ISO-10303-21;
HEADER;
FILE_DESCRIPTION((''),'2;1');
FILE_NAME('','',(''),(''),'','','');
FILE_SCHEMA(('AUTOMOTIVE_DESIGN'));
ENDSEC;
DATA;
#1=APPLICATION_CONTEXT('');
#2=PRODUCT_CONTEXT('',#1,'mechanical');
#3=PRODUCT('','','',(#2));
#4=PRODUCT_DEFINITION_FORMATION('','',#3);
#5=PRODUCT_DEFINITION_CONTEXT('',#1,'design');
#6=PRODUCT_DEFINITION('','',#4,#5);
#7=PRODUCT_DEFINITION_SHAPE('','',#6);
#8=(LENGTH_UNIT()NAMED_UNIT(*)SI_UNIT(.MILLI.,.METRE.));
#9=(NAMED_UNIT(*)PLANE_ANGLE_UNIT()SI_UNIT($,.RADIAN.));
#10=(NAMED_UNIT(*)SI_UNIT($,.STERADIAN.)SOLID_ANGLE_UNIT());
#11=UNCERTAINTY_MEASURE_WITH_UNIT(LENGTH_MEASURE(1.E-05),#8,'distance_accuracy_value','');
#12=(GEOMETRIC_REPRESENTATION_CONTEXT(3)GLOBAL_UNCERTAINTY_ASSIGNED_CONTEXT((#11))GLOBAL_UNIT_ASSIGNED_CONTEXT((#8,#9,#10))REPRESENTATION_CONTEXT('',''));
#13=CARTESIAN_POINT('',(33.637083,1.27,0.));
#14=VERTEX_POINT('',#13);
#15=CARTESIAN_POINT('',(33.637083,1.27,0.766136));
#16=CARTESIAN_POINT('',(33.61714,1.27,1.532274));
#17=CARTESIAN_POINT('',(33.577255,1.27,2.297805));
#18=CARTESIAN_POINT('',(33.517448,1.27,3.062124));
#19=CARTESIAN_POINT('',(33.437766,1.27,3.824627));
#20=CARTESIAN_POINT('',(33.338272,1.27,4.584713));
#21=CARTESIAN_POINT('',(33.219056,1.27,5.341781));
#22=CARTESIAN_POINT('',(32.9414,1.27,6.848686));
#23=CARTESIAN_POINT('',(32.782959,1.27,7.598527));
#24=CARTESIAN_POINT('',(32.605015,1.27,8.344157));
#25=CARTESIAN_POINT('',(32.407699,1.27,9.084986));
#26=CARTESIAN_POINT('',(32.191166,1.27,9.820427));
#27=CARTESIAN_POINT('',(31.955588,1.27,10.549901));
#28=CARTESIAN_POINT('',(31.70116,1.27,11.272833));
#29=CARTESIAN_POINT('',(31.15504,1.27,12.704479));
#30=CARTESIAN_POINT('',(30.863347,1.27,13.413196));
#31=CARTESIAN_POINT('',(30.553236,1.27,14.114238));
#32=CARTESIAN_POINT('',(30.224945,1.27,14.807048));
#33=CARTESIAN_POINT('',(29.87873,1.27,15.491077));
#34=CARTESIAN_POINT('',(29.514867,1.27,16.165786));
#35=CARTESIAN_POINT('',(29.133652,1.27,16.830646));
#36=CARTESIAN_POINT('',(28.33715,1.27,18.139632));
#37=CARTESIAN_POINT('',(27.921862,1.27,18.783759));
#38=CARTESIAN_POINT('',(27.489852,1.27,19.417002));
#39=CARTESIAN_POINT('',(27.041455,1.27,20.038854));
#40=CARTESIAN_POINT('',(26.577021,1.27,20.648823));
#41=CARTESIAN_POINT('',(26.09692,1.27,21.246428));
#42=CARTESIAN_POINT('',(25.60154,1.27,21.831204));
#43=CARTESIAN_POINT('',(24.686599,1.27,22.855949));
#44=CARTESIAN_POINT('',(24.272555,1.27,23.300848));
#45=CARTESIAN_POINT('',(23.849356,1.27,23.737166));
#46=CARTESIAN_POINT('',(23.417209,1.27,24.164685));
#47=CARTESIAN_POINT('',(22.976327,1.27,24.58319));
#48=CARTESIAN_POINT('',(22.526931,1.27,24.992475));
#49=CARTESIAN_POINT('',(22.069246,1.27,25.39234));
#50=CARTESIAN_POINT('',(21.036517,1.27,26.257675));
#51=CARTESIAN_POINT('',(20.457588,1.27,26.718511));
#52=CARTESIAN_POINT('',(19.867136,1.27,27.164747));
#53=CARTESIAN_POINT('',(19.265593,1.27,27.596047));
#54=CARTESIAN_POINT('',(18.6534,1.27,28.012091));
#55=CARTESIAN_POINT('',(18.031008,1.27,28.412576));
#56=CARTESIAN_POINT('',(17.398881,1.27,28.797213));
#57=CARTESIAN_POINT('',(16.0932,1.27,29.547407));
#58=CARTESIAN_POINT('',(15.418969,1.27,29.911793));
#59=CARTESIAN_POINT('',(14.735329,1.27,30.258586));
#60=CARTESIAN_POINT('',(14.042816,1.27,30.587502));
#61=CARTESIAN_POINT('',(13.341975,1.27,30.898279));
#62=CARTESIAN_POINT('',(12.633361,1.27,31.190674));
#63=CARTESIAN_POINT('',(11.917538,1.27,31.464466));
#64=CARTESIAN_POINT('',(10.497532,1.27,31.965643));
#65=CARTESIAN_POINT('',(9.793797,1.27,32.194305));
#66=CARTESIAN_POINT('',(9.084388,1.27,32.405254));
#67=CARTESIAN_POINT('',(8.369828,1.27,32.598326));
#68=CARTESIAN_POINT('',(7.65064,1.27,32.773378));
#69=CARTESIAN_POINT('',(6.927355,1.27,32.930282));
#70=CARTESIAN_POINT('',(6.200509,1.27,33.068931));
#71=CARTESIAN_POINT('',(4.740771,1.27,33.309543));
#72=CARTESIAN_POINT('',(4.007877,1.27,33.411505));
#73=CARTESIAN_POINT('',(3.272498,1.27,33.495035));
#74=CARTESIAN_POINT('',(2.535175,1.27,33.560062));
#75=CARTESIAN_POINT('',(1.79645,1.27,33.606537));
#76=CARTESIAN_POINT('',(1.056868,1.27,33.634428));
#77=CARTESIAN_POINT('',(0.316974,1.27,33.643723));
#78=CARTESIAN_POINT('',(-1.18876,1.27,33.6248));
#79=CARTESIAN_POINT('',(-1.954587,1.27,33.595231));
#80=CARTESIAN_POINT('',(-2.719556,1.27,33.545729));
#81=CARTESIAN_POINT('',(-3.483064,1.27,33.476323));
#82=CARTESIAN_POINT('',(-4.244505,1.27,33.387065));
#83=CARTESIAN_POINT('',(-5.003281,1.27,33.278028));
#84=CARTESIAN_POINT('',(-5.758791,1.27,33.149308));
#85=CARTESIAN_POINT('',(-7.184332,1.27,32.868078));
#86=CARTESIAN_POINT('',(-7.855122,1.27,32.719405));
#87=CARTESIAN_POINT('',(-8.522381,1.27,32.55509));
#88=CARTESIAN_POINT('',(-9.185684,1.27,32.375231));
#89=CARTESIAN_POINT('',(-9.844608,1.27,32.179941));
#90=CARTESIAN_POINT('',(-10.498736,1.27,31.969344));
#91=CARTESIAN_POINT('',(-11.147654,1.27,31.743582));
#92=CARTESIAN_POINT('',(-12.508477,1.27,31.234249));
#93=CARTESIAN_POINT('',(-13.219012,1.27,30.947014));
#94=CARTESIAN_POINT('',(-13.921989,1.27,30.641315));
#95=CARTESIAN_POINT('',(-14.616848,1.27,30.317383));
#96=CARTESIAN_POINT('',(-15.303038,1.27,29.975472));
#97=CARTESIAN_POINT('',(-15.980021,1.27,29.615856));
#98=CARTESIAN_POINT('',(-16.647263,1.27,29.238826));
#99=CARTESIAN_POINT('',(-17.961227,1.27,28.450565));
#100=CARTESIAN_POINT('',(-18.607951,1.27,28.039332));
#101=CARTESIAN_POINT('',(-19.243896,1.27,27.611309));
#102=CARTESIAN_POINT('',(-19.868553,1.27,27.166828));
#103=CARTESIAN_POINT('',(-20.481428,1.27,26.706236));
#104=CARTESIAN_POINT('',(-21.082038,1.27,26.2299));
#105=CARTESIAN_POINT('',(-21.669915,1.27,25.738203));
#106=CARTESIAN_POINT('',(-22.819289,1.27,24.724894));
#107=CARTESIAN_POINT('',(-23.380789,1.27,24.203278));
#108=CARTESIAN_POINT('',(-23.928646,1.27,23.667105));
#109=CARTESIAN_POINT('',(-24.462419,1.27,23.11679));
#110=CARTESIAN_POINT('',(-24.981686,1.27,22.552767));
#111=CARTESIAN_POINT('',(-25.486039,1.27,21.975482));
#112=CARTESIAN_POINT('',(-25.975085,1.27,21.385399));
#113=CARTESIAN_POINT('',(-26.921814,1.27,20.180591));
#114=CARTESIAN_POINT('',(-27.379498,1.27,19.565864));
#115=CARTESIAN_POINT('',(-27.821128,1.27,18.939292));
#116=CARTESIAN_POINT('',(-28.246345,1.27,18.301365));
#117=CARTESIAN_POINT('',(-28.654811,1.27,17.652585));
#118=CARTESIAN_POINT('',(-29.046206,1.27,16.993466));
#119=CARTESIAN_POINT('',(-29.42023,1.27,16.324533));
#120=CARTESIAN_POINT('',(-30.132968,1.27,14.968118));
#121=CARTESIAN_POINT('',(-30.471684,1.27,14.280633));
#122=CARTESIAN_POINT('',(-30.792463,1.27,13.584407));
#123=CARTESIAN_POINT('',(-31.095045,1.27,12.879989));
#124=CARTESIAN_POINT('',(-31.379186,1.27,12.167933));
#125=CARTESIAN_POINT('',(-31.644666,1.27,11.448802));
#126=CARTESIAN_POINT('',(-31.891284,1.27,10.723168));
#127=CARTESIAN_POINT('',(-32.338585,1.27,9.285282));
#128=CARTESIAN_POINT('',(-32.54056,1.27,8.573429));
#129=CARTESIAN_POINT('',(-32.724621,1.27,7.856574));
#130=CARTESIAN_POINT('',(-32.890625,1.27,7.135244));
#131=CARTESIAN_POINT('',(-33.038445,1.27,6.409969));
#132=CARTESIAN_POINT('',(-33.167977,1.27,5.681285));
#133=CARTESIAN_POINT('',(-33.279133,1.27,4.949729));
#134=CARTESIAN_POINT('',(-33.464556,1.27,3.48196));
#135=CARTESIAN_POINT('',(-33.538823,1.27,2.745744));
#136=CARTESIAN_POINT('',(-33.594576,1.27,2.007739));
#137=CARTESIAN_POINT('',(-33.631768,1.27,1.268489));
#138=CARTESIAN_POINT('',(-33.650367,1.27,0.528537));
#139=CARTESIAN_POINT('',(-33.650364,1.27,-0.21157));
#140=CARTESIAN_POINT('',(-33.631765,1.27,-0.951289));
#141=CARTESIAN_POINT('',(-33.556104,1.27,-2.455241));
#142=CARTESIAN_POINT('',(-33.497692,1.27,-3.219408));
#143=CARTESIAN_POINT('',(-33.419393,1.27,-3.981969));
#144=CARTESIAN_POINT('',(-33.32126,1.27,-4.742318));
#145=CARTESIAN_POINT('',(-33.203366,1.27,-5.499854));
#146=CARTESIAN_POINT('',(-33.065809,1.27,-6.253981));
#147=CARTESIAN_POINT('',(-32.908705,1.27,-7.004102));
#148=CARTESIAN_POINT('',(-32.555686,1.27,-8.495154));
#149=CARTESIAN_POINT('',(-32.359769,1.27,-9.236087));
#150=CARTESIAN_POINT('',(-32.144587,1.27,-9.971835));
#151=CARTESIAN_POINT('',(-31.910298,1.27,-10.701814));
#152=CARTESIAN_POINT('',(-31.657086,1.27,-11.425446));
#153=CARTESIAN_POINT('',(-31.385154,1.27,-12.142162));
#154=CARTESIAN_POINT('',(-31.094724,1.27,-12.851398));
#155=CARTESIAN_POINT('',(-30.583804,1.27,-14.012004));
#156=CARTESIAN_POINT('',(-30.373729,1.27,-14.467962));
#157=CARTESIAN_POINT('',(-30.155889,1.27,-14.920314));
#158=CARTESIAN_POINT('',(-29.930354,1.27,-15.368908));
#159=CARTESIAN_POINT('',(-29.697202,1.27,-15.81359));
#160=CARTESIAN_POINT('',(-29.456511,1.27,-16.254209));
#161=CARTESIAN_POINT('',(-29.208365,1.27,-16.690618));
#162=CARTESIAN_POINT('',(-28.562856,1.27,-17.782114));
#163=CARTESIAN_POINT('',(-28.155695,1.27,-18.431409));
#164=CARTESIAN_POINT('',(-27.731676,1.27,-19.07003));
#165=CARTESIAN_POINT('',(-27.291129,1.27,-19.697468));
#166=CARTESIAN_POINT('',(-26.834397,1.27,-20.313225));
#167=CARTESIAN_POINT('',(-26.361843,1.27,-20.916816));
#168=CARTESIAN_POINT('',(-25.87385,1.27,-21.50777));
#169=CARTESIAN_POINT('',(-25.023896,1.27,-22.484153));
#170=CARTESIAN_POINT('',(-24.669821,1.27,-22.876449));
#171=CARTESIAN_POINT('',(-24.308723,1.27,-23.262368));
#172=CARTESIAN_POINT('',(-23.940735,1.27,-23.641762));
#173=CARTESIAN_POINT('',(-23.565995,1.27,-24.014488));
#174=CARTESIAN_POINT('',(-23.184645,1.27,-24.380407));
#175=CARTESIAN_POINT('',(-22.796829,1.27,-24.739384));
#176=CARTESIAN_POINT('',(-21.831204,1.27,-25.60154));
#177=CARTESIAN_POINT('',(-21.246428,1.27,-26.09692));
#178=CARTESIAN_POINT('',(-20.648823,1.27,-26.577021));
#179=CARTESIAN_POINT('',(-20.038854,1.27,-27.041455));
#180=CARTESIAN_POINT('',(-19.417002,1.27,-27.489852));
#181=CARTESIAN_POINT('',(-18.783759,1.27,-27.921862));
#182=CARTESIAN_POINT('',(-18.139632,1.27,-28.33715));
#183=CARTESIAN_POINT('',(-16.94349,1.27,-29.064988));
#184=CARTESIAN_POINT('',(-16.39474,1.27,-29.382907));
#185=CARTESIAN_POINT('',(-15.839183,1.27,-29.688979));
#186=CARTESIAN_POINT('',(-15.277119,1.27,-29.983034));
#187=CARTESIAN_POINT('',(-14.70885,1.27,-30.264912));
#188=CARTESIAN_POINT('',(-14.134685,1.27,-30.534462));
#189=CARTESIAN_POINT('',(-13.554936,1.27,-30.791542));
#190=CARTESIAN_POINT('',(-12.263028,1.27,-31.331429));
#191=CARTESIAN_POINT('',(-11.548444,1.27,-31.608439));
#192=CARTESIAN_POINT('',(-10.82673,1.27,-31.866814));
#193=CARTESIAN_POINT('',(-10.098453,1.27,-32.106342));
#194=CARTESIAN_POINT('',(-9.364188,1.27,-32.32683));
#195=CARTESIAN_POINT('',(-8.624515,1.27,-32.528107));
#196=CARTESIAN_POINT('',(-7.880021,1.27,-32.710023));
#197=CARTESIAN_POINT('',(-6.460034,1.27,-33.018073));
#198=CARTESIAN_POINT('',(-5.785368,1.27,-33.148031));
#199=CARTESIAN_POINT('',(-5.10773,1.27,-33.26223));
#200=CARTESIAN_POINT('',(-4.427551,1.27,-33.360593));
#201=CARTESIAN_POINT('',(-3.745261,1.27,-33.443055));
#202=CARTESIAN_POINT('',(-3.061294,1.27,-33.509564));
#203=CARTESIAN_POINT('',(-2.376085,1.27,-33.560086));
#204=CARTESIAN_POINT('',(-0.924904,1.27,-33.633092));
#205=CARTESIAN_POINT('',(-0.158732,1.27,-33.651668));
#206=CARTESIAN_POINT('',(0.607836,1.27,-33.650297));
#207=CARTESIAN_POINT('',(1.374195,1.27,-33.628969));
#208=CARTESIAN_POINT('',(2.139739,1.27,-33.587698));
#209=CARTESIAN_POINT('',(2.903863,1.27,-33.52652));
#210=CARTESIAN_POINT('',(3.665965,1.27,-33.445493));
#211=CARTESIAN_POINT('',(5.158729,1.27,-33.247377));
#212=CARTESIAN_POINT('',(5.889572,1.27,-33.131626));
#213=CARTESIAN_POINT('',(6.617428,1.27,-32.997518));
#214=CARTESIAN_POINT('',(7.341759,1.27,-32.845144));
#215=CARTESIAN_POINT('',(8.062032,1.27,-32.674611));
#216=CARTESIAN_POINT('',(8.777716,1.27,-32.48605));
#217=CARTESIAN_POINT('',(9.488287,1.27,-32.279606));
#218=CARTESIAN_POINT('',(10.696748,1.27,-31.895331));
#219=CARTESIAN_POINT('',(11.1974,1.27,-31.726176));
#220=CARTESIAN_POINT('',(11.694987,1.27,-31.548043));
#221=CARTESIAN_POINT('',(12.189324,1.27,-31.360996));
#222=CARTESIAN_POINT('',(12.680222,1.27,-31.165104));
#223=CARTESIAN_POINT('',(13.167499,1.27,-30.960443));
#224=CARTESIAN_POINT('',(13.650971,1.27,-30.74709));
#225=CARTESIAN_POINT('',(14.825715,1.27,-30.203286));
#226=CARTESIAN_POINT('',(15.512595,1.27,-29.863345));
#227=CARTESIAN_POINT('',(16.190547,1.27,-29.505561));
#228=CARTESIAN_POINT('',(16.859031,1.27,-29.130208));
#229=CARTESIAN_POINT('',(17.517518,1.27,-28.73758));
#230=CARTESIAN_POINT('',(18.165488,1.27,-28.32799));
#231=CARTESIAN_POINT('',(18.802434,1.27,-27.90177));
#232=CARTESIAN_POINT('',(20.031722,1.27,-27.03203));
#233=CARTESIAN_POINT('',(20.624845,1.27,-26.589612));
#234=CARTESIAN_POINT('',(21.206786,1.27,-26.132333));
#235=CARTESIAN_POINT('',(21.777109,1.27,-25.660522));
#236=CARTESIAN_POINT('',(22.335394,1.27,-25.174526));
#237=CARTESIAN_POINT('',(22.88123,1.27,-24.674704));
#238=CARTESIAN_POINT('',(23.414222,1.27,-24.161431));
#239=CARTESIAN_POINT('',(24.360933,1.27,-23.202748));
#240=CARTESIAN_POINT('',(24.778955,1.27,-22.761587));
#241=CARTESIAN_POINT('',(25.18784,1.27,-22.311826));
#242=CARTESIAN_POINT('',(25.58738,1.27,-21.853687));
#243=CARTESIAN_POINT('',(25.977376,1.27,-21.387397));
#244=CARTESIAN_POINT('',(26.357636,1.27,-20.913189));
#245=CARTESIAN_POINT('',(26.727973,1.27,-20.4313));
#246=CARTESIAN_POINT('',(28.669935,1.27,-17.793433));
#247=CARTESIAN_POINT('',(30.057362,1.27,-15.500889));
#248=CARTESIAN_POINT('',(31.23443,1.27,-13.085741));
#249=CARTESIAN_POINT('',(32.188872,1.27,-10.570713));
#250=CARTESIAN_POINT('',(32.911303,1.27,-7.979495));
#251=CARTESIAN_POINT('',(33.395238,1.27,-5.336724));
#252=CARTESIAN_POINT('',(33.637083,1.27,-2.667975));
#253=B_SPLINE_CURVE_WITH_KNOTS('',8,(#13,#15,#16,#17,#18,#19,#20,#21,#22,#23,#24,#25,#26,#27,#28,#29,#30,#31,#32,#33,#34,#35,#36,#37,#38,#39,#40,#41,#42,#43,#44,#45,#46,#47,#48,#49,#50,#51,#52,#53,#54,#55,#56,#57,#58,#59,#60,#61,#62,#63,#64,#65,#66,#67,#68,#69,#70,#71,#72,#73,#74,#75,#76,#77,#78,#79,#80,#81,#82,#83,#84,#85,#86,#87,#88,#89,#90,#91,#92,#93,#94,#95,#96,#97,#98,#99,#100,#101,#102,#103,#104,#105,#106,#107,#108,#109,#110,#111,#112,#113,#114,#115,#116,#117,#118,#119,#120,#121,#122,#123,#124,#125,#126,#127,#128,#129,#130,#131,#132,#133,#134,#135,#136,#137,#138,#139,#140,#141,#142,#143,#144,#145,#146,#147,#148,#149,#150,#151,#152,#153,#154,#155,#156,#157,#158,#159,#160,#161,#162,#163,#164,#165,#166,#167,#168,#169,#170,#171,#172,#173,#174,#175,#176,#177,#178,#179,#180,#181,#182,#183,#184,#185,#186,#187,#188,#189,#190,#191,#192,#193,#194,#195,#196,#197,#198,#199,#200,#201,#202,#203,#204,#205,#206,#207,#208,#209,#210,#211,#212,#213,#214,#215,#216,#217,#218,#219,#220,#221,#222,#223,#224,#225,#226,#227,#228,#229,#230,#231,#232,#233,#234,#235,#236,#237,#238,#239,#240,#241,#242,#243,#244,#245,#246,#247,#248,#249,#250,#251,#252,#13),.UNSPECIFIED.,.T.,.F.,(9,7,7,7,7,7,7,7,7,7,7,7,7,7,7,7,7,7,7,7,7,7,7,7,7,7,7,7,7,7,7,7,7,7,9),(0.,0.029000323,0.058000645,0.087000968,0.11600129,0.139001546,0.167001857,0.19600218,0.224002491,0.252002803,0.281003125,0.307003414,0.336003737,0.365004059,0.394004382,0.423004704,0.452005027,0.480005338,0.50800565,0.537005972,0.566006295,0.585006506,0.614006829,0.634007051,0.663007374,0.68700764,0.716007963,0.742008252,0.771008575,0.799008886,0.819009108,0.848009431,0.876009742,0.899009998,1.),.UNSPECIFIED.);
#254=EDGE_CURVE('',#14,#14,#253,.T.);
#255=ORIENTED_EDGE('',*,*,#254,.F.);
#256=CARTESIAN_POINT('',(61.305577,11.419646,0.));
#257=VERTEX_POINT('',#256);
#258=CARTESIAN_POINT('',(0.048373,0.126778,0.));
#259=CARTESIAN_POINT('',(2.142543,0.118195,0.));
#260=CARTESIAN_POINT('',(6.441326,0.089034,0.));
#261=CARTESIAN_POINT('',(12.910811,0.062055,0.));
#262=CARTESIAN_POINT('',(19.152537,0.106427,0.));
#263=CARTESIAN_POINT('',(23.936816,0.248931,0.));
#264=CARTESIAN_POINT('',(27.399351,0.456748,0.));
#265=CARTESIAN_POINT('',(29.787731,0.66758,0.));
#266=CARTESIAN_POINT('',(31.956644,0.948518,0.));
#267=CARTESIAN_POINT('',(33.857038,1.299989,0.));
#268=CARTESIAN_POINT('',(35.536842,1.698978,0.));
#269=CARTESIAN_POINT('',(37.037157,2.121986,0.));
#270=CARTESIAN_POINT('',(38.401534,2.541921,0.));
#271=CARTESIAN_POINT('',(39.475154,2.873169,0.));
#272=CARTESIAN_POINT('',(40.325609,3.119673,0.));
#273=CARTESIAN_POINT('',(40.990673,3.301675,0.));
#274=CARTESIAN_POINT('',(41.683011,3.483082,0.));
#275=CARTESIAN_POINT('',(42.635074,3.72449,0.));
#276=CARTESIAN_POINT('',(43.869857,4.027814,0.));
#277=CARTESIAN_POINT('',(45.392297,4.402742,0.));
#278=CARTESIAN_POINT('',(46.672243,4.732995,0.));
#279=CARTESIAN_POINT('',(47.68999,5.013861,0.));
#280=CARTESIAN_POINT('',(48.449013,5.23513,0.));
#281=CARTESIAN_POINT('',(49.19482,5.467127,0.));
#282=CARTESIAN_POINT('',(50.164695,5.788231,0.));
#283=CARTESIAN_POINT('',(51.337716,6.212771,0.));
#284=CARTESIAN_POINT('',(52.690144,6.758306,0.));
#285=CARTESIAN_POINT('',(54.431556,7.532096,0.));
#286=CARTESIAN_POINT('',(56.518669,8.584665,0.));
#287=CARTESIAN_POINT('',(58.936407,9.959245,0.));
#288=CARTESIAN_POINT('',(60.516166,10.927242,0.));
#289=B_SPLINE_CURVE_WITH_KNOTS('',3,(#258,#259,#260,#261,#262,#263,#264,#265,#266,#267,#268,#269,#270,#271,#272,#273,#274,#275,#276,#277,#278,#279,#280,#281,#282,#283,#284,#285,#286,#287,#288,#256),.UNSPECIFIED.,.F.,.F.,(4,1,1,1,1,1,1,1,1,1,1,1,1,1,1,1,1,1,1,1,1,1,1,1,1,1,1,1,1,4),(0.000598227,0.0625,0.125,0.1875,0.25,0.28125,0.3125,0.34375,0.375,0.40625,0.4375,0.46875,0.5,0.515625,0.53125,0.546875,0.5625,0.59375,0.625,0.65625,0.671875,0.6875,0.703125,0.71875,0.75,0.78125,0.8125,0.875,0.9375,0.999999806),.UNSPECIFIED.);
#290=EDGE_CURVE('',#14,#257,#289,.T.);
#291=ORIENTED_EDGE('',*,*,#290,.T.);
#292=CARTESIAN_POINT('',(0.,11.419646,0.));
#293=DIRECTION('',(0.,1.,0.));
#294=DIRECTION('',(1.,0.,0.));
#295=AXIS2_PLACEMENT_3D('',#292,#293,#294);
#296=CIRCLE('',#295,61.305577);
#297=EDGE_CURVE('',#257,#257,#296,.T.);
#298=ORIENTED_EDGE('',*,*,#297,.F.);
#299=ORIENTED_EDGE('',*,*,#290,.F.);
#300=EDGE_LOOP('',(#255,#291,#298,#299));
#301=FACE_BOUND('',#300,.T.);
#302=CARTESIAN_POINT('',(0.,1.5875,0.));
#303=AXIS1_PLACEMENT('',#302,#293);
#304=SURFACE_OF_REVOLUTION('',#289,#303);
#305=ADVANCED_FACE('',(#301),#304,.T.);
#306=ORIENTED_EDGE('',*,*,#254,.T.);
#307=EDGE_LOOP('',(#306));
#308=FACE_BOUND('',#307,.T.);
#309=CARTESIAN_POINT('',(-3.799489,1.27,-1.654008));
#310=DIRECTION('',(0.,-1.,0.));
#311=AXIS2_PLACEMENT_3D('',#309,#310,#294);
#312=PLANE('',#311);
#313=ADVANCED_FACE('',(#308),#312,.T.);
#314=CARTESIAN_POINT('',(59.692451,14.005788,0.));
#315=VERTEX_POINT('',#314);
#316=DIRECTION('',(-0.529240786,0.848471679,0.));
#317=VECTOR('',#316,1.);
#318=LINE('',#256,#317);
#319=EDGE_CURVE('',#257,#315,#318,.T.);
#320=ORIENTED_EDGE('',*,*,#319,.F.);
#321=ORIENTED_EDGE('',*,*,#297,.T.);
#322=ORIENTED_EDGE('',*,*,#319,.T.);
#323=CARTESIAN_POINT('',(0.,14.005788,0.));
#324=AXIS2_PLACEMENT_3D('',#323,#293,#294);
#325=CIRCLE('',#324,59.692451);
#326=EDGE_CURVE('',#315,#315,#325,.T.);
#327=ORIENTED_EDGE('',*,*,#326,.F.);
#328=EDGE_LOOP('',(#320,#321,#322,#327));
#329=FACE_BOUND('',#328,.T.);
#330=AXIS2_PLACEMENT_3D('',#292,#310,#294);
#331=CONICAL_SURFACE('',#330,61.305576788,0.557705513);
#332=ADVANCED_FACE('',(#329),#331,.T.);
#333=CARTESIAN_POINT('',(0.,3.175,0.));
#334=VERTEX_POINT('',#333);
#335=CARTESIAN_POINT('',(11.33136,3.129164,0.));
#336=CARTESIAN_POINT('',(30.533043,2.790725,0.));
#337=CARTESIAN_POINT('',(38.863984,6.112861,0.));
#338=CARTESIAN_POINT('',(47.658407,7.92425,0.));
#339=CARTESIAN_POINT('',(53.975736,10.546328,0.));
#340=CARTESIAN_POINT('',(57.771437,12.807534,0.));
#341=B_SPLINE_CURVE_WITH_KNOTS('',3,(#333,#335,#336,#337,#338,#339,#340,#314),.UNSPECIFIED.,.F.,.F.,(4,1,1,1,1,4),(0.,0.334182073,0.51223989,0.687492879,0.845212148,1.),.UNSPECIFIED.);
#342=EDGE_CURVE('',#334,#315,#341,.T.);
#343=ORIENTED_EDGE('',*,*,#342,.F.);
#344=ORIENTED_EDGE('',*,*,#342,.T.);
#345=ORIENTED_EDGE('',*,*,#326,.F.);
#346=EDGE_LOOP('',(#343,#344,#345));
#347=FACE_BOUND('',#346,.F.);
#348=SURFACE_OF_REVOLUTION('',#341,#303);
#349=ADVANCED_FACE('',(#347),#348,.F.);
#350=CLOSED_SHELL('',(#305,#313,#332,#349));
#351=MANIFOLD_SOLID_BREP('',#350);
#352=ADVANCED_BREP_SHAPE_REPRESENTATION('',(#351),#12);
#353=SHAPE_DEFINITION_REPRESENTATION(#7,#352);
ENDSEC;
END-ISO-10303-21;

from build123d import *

# Parameters (mm, degrees)
F3_DEPTH = 1.27


# Not quite as in the source:
# - the dataset's text gives a spline's control points without its knots; the knots are read off the source's solid


with BuildPart() as f1:
    # F0 (on Top) → F1 (revolve)
    with BuildSketch(Plane.XY):
        with BuildLine():
            Line((0, 3.175), (0, 0))
            Line((0, 0), (0.0483732221, 0.126777769))
            add(Edge.make_bspline(
                [(0.0483732221, 0.1267777671), (2.1425433468, 0.1181949129), (6.4413258481, 0.0890337964), (12.9108112798, 0.0620545487), (19.1525366078, 0.1064268527), (23.9368157495, 0.2489309341), (27.3993505655, 0.4567479093), (29.7877305037, 0.6675796116), (31.9566435279, 0.9485179212), (33.8570376049, 1.2999888181), (35.5368416593, 1.69897799), (37.0371573939, 2.1219862961), (38.4015343875, 2.5419205888), (39.4751540886, 2.8731693163), (40.3256085154, 3.119672766), (40.9906733706, 3.3016750857), (41.6830106743, 3.4830815946), (42.6350739841, 3.724489538), (43.8698571739, 4.027813647), (45.3922972671, 4.4027417127), (46.6722427938, 4.7329949415), (47.689990497, 5.0138614605), (48.4490127923, 5.2351298254), (49.1948201109, 5.4671266007), (50.1646945957, 5.7882307085), (51.337715765, 6.212770994), (52.690143853, 6.758306314), (54.4315564533, 7.5320961824), (56.5186693938, 8.5846645619), (58.9364068625, 9.9592448244), (60.5161655926, 10.9272420375), (61.3055767878, 11.419646447)],
                knots=[0.0005982269, 0.0005982269, 0.0005982269, 0.0005982269, 0.0625, 0.125, 0.1875, 0.25, 0.28125, 0.3125, 0.34375, 0.375, 0.40625, 0.4375, 0.46875, 0.5, 0.515625, 0.53125, 0.546875, 0.5625, 0.59375, 0.625, 0.65625, 0.671875, 0.6875, 0.703125, 0.71875, 0.75, 0.78125, 0.8125, 0.875, 0.9375, 0.9999998063, 0.9999998063, 0.9999998063, 0.9999998063], degree=3))
            Line((61.3055767878, 11.419646447), (59.6924508727, 14.0057881257))
            add(Edge.make_bspline(
                [(0, 3.175), (11.3313598558, 3.1291642226), (30.5330430918, 2.7907248238), (38.8639839953, 6.1128612906), (47.6584070453, 7.9242497832), (53.9757361198, 10.5463281379), (57.7714374215, 12.8075335236), (59.6924508727, 14.0057881257)],
                knots=[0, 0, 0, 0, 0.3341820731, 0.5122398896, 0.6874928788, 0.8452121481, 1, 1, 1, 1], degree=3))
        make_face()
    revolve(axis=Axis((0, 1.5875, 0), (0, 1, 0)))

    # F2 (on Front) → F3 (cut, symmetric)
    with BuildSketch(Plane.XZ):
        Polygon((-63.8710334897, -66.6622146964), (-51.9457645714, -66.154755652), (56.3966184855, -66.154755652), (56.3966184855, 62.9934221506), (-63.8710334897, 62.9934221506), align=None)
    extrude(amount=F3_DEPTH, both=True, mode=Mode.SUBTRACT)


solid = f1.part
